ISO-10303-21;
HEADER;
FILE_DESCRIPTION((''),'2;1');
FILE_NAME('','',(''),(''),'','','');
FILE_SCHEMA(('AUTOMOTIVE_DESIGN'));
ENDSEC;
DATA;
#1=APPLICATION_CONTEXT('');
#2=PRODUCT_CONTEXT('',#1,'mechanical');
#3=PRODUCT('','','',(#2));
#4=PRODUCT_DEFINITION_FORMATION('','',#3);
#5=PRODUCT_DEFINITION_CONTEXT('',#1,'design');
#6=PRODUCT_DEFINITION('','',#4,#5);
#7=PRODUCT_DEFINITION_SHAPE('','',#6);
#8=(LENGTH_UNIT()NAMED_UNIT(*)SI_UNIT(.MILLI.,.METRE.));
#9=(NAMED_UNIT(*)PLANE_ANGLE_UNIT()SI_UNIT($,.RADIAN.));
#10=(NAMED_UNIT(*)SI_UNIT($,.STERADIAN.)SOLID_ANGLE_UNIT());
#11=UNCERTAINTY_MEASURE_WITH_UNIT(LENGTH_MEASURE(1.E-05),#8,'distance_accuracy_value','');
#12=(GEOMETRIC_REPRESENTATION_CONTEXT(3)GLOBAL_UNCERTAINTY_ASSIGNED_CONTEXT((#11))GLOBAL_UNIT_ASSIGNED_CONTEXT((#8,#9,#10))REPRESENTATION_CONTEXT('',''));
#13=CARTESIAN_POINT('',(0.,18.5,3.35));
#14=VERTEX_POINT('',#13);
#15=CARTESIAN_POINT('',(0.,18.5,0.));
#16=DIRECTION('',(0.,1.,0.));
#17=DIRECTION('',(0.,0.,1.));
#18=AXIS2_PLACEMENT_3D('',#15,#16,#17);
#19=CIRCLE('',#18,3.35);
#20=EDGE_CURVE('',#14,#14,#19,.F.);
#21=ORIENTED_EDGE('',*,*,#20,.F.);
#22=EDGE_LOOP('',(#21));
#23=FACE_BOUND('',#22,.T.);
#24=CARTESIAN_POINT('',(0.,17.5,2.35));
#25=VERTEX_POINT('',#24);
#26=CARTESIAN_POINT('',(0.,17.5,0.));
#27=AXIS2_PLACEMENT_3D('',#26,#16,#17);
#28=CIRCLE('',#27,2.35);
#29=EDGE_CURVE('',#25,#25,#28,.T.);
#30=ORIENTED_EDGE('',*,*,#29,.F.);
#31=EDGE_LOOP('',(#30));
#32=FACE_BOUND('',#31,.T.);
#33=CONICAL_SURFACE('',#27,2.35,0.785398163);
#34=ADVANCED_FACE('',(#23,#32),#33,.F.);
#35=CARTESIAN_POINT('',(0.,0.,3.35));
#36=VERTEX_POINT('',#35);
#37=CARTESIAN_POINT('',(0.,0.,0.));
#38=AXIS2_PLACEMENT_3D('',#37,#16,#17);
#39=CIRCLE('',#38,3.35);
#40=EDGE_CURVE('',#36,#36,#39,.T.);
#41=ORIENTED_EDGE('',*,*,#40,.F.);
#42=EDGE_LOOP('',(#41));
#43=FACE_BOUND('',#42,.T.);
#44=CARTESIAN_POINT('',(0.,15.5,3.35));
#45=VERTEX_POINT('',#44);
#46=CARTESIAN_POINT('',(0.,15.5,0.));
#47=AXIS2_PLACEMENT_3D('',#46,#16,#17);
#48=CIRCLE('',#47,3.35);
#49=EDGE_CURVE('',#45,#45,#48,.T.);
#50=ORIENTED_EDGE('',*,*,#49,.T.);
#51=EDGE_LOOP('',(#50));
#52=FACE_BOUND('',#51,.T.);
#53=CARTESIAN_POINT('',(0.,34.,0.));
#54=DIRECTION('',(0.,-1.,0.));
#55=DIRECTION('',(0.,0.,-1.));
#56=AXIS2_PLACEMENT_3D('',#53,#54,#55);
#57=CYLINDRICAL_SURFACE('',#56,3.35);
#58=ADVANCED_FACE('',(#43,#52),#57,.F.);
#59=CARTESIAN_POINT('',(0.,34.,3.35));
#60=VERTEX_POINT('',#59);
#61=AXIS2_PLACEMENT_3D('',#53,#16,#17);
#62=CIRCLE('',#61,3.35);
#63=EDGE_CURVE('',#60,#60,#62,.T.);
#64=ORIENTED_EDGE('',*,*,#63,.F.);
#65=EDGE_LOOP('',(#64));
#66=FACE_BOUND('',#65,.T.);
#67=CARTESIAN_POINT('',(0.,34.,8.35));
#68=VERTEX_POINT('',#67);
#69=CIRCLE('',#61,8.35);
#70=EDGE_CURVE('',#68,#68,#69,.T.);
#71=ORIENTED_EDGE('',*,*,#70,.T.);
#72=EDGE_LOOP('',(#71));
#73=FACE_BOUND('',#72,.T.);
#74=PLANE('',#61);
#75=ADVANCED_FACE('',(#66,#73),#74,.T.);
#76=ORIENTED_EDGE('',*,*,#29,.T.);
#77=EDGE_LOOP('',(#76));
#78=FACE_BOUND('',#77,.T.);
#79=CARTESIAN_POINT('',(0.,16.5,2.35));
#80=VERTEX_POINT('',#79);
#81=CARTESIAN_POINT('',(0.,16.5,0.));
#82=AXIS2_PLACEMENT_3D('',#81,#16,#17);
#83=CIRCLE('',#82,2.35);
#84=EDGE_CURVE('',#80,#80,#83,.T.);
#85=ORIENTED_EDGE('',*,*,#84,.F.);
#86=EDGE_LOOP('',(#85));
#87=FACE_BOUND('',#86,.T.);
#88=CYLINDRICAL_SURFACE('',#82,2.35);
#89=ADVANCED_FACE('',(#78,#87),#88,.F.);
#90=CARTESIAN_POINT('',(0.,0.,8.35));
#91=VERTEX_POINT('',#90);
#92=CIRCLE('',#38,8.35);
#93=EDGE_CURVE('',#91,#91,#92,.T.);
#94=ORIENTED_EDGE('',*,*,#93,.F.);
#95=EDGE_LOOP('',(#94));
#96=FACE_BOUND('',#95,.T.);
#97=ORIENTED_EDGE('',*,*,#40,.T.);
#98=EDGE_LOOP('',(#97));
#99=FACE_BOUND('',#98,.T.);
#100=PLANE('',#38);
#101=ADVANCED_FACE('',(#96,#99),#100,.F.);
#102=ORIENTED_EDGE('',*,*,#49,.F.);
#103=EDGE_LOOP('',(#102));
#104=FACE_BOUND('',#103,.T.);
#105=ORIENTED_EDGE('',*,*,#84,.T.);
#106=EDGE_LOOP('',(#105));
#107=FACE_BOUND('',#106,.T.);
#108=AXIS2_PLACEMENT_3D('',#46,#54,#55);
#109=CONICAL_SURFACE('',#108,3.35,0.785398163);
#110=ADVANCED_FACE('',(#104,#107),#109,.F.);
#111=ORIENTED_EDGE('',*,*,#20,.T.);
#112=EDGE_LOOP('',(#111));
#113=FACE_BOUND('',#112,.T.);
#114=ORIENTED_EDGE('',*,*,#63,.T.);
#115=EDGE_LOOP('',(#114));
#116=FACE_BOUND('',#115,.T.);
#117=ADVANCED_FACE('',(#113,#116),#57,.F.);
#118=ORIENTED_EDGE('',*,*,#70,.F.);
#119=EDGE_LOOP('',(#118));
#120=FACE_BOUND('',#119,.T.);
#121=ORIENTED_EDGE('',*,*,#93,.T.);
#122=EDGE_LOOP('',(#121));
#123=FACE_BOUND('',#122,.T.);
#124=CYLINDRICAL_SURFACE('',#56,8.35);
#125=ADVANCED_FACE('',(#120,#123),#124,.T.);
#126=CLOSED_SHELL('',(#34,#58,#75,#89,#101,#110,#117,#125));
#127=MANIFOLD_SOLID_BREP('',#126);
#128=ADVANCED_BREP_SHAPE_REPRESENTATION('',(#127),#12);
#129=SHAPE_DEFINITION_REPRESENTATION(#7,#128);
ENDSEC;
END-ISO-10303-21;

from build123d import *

# Parameters (mm, degrees)
SKETCH1_R                = 8.35
SKETCH1_R_2              = 3.35
BOSS_EXTRUDE1_DEPTH      = 34
BOSS_EXTRUDE2_DEPTH      = 0.5
BOSS_EXTRUDE2_DEPTH_BACK = 0.5
SKETCH2_R                = 3.35
SKETCH2_R_2              = 2.35
CHAMFER1_SIZE            = 1


with BuildPart() as part:
    # Sketch1 → Boss-Extrude1 (new body)
    with BuildSketch(Plane(origin=(0, 0, 0), x_dir=(1, 0, 0), z_dir=(0, 1, 0))):
        with Locations(Location((0, 0, 0), (0, 0, 270))):
            Circle(SKETCH1_R)
        with Locations(Location((0, 0, 0), (0, 0, 270))):
            Circle(SKETCH1_R_2, mode=Mode.SUBTRACT)
    extrude(amount=BOSS_EXTRUDE1_DEPTH)

    # Sketch2 → Boss-Extrude2 (add, two sides: drawn at the far end of the back side and taken through both)
    with BuildSketch(Plane(origin=(0, 17, 0), x_dir=(1, 0, 0), z_dir=(0, 1, 0)).offset(-BOSS_EXTRUDE2_DEPTH_BACK)):
        with Locations(Location((0, 0, 0), (0, 0, 270))):
            Circle(SKETCH2_R)
        with Locations(Location((0, 0, 0), (0, 0, 270))):
            Circle(SKETCH2_R_2, mode=Mode.SUBTRACT)
    extrude(amount=BOSS_EXTRUDE2_DEPTH + BOSS_EXTRUDE2_DEPTH_BACK)

    # Chamfer1
    chamfer1_edges = [part.edges().sort_by_distance(p)[0] for p in [
        (0, 17.5, -3.35),
        (0, 16.5, -3.35),
    ]]
    chamfer(chamfer1_edges, length=CHAMFER1_SIZE - 0.0001)  # a hair under: the kernel refuses the full size


solid = part.part
